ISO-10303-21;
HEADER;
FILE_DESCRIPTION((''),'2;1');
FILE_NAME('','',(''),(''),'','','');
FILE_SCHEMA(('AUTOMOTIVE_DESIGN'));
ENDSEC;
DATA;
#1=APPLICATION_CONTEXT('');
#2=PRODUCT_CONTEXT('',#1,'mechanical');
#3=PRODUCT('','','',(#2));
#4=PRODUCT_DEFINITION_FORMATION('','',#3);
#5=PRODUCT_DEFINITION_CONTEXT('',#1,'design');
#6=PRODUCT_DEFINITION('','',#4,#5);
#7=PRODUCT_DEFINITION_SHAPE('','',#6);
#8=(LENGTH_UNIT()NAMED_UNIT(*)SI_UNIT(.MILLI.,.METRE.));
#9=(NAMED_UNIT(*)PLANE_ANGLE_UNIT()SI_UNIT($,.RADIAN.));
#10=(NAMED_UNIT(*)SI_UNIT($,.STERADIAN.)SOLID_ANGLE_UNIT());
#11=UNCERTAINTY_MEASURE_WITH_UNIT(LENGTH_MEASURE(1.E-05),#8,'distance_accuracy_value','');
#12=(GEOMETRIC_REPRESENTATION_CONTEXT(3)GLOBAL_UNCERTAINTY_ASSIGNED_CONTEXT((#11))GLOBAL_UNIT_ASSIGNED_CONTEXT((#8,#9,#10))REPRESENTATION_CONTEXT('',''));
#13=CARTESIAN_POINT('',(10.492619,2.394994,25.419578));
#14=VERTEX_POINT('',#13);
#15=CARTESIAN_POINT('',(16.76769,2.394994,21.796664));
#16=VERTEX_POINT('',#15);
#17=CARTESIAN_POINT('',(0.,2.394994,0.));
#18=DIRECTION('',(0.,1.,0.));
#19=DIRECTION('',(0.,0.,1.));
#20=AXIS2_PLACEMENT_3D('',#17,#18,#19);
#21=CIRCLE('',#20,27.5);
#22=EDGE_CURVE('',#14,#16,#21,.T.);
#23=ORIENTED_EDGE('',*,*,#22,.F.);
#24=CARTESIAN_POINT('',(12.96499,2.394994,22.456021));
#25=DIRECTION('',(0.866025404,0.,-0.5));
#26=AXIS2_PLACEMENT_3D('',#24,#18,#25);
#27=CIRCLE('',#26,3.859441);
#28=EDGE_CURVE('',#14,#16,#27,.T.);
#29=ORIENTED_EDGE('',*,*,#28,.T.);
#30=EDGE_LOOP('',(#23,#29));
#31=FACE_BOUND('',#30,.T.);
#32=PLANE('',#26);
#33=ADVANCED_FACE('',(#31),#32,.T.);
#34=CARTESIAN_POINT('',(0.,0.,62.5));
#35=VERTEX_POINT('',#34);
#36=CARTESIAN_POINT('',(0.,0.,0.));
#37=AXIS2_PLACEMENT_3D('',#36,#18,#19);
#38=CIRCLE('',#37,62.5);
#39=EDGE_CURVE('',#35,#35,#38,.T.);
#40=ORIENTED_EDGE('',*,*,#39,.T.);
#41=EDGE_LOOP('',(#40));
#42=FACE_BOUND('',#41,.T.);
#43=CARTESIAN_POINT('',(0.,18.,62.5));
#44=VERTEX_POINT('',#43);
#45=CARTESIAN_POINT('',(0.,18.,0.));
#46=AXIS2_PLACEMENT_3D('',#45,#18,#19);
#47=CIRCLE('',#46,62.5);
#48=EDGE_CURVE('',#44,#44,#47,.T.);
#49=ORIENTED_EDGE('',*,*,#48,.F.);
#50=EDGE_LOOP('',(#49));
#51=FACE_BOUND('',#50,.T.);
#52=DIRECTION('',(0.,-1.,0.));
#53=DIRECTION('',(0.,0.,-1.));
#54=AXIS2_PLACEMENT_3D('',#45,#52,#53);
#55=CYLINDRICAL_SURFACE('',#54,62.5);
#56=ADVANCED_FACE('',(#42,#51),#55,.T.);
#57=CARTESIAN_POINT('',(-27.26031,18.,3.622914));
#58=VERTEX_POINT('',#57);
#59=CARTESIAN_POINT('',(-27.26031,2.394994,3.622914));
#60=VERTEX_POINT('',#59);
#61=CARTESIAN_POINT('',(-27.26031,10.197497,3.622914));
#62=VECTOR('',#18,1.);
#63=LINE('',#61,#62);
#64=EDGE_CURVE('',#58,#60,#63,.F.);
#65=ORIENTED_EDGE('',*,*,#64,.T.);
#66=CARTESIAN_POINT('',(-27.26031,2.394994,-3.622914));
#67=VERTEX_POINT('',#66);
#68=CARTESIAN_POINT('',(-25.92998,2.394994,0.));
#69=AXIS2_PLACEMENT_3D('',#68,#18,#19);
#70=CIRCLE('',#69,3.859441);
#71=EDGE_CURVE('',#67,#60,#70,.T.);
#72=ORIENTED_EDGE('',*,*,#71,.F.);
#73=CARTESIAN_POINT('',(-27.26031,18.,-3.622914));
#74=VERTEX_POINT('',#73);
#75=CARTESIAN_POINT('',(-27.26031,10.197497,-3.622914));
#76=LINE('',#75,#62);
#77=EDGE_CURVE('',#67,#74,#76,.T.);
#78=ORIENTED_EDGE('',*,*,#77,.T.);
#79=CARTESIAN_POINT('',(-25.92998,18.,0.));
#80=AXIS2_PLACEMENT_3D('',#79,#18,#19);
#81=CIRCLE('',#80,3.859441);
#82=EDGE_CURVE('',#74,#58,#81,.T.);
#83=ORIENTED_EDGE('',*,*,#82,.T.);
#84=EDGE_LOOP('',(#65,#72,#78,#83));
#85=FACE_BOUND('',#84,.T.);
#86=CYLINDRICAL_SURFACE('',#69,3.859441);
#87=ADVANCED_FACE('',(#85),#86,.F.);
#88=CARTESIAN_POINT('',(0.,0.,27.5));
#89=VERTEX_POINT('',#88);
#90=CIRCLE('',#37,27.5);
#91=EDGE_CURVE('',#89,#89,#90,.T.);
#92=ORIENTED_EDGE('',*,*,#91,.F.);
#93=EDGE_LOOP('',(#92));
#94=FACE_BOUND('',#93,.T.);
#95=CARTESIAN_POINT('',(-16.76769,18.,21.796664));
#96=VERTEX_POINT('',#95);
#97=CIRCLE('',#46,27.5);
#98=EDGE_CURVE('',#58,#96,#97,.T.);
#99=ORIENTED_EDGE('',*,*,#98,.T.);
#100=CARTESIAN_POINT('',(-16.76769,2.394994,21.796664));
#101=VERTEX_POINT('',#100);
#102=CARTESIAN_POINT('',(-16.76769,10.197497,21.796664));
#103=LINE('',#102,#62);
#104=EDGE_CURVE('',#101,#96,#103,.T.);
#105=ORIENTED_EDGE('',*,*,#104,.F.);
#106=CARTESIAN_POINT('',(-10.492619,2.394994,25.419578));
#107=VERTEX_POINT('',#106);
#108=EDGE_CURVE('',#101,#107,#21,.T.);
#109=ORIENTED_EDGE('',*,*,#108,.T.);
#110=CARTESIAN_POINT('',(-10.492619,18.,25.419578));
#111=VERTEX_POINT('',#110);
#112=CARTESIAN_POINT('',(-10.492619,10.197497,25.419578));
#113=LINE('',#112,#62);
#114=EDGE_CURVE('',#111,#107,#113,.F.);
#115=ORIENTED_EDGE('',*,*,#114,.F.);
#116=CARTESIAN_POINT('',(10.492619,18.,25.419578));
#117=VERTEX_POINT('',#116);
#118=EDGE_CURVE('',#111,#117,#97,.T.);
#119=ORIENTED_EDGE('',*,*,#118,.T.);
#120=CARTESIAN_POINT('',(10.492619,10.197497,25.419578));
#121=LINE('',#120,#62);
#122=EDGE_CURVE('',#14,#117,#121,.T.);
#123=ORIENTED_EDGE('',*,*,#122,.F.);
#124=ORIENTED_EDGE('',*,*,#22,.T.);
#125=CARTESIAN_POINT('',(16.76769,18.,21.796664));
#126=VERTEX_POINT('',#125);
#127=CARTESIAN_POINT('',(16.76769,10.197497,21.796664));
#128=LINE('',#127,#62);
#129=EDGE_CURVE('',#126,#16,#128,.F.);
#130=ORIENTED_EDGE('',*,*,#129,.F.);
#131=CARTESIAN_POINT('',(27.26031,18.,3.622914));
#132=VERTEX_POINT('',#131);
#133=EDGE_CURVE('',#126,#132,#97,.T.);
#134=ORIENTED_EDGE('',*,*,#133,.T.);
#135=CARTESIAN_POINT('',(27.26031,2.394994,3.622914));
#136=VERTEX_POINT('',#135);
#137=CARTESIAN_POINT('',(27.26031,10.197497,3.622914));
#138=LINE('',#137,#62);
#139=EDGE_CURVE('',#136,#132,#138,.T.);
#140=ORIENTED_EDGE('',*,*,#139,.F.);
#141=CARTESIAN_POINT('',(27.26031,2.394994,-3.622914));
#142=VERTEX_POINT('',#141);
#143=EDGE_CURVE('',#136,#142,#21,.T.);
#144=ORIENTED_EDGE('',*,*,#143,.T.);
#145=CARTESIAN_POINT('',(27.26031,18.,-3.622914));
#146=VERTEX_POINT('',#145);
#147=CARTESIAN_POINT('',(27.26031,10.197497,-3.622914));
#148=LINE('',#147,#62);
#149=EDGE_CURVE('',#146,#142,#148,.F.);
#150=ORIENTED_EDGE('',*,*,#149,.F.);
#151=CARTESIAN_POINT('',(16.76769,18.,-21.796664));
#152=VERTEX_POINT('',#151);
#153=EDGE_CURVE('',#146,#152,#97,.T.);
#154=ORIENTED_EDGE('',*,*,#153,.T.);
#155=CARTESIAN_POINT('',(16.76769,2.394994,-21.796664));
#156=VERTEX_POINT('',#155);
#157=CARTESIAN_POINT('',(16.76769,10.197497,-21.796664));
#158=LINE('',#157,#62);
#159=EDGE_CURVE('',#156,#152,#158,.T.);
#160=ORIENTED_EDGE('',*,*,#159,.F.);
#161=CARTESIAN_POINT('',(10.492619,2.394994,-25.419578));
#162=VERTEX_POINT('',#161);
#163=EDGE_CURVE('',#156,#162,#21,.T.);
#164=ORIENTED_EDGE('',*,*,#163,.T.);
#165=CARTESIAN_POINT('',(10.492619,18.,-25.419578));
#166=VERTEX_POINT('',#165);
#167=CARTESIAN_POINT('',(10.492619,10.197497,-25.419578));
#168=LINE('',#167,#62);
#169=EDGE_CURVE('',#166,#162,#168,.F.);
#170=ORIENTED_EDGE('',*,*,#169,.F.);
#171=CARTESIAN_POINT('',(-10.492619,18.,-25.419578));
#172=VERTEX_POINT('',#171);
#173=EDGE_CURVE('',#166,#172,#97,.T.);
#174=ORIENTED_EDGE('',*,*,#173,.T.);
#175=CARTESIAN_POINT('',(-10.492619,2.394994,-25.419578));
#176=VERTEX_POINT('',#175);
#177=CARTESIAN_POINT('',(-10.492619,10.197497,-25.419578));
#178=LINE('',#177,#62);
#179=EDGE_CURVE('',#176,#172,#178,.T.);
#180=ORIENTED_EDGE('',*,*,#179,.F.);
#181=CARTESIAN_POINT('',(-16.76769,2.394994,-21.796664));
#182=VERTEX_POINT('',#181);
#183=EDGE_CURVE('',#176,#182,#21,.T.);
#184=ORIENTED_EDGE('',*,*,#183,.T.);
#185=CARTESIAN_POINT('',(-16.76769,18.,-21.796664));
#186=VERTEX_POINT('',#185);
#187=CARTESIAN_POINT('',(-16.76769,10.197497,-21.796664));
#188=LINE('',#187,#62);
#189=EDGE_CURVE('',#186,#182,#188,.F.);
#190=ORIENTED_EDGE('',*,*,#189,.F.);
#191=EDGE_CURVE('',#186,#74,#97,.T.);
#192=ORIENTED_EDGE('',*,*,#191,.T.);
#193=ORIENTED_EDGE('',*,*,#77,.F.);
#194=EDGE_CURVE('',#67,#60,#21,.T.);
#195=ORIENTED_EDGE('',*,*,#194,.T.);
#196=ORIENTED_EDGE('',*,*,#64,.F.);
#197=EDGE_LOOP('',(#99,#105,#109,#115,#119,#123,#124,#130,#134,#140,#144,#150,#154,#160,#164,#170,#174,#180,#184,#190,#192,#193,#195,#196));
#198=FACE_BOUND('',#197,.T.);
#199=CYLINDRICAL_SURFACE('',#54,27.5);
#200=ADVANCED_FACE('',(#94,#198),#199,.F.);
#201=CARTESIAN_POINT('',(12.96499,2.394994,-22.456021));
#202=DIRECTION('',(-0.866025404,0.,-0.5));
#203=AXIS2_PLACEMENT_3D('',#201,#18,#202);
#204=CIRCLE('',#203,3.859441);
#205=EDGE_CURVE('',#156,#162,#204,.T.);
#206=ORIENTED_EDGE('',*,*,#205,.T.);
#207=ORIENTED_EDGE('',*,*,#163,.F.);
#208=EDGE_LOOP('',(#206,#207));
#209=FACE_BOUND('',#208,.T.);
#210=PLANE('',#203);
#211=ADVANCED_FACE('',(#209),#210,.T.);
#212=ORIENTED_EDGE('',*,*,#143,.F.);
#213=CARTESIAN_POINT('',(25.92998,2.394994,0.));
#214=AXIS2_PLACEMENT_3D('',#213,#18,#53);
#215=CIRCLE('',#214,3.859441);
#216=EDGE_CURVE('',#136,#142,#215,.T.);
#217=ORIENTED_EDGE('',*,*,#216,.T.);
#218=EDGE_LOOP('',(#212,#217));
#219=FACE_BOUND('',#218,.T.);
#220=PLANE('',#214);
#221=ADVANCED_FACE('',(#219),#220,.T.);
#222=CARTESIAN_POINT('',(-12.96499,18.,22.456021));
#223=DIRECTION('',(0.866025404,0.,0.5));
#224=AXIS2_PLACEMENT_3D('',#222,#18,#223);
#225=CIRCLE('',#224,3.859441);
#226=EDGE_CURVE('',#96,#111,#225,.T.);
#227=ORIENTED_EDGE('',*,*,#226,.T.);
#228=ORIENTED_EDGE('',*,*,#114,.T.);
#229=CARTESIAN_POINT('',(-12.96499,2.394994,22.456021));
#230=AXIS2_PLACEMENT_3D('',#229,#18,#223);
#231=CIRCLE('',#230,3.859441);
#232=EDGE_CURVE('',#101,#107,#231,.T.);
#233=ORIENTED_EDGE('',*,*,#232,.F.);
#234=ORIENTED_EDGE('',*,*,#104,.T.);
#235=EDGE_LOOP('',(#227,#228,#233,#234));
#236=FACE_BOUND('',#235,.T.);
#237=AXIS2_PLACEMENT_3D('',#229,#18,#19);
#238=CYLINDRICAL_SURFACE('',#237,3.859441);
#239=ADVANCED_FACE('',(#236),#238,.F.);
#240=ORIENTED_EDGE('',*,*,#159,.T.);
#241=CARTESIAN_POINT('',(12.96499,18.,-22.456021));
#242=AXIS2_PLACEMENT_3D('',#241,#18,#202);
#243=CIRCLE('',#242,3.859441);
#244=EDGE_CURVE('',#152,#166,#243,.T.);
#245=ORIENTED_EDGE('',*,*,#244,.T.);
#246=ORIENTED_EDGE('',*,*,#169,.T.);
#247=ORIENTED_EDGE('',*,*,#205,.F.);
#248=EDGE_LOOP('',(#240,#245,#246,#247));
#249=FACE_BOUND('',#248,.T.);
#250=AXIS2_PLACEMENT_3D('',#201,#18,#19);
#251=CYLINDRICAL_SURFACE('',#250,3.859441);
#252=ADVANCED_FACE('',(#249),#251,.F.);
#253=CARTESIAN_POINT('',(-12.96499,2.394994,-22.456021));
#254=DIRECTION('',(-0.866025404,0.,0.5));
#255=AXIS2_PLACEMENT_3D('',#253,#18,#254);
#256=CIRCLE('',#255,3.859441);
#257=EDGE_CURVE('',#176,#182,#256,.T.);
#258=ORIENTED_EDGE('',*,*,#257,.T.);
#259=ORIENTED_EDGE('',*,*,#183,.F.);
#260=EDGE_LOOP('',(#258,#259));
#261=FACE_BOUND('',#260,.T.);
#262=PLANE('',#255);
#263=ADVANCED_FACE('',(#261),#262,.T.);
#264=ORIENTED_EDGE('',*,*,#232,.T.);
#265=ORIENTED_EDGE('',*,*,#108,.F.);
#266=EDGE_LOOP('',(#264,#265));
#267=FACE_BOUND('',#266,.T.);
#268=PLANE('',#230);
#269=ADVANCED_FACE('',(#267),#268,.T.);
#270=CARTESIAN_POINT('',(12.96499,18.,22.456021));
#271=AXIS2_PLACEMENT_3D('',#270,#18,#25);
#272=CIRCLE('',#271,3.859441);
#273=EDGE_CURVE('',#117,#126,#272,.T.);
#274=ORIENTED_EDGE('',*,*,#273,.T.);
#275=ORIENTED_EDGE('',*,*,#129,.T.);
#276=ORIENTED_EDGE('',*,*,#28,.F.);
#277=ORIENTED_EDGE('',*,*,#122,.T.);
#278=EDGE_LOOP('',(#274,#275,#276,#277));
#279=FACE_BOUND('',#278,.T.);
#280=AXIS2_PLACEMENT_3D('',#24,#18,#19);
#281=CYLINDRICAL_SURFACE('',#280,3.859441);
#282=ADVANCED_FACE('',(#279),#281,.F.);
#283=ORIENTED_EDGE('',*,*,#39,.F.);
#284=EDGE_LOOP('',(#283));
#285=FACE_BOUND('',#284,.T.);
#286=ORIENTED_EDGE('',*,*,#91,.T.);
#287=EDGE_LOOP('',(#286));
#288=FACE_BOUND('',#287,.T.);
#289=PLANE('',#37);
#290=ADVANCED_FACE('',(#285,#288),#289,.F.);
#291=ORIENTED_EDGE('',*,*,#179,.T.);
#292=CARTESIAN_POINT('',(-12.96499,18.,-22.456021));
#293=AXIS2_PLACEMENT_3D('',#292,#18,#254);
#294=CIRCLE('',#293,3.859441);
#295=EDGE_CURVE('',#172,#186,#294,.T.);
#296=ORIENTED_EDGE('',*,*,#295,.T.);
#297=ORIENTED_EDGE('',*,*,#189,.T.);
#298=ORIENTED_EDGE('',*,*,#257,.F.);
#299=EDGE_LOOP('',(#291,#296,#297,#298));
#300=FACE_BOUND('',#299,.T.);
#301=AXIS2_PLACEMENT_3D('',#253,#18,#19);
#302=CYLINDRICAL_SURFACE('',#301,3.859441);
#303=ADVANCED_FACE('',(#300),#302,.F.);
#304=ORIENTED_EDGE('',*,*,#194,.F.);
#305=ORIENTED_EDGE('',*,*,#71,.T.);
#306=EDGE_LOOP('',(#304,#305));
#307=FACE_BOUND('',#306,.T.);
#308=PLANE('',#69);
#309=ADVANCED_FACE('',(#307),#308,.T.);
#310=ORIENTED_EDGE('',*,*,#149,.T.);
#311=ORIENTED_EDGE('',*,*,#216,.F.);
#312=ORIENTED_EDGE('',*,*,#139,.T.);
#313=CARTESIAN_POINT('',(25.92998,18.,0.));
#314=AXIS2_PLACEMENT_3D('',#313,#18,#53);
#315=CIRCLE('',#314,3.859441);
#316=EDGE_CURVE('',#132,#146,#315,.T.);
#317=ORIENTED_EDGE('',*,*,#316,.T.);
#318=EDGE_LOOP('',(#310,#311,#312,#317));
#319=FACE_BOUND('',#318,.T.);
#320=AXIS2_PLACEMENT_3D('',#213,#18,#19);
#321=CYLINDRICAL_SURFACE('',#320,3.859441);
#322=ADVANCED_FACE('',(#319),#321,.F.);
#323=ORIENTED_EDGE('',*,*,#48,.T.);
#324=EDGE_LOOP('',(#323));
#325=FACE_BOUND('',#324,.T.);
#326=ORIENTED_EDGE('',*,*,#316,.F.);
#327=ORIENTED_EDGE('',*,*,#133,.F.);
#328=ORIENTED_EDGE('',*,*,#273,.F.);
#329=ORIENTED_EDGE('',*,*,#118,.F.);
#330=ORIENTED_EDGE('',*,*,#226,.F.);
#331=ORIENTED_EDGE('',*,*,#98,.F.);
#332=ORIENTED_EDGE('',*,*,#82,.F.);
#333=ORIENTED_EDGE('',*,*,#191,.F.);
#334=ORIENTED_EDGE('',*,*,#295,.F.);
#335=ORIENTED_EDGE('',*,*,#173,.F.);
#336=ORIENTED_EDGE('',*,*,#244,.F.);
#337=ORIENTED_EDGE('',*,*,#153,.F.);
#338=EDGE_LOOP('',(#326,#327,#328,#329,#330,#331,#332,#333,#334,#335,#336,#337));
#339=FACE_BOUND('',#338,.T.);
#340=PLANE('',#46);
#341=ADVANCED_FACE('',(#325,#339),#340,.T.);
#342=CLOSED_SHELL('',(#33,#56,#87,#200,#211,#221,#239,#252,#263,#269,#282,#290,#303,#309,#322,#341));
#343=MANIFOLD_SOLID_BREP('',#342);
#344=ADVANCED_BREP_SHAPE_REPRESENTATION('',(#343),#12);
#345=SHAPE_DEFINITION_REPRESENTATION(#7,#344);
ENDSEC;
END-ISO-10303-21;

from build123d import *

# Parameters (mm, degrees)
SKETCH1_R           = 62.5
BOSS_EXTRUDE1_DEPTH = 18
SKETCH2_R           = 27.5
CUT_EXTRUDE1_DEPTH  = 91.202549853
SKETCH3_R           = 3.859440813
CUT_EXTRUDE2_DEPTH  = 15.605006108
CIRPATTERN1_COUNT   = 6


with BuildPart() as part:
    # Sketch1 → Boss-Extrude1 (new body)
    with BuildSketch(Plane(origin=(0, 0, 0), x_dir=(1, 0, 0), z_dir=(0, 1, 0))):
        Circle(SKETCH1_R)
    extrude(amount=BOSS_EXTRUDE1_DEPTH)

    # Sketch2 → Cut-Extrude1 (cut, through all)
    with BuildSketch(Plane(origin=(0, 0, 0), x_dir=(1, 0, 0), z_dir=(0, 1, 0))):
        Circle(SKETCH2_R)
    extrude(amount=CUT_EXTRUDE1_DEPTH, mode=Mode.SUBTRACT)

    # Sketch3 → Cut-Extrude2 (cut)
    with BuildSketch(Plane(origin=(0, 18, 0), x_dir=(1, 0, 0), z_dir=(0, 1, 0))):
        with Locations((-25.929979996, 0)):
            Circle(SKETCH3_R)
    cut_extrude2 = extrude(amount=-CUT_EXTRUDE2_DEPTH, mode=Mode.SUBTRACT)

    # CirPattern1: Cut-Extrude2 ×6 about axis
    cirpattern1_axis = Axis((0, 0, 0), (0, 1, 0))
    for i in range(1, CIRPATTERN1_COUNT):
        add(cut_extrude2.rotate(cirpattern1_axis, i * 360 / CIRPATTERN1_COUNT), mode=Mode.SUBTRACT)


solid = part.part
